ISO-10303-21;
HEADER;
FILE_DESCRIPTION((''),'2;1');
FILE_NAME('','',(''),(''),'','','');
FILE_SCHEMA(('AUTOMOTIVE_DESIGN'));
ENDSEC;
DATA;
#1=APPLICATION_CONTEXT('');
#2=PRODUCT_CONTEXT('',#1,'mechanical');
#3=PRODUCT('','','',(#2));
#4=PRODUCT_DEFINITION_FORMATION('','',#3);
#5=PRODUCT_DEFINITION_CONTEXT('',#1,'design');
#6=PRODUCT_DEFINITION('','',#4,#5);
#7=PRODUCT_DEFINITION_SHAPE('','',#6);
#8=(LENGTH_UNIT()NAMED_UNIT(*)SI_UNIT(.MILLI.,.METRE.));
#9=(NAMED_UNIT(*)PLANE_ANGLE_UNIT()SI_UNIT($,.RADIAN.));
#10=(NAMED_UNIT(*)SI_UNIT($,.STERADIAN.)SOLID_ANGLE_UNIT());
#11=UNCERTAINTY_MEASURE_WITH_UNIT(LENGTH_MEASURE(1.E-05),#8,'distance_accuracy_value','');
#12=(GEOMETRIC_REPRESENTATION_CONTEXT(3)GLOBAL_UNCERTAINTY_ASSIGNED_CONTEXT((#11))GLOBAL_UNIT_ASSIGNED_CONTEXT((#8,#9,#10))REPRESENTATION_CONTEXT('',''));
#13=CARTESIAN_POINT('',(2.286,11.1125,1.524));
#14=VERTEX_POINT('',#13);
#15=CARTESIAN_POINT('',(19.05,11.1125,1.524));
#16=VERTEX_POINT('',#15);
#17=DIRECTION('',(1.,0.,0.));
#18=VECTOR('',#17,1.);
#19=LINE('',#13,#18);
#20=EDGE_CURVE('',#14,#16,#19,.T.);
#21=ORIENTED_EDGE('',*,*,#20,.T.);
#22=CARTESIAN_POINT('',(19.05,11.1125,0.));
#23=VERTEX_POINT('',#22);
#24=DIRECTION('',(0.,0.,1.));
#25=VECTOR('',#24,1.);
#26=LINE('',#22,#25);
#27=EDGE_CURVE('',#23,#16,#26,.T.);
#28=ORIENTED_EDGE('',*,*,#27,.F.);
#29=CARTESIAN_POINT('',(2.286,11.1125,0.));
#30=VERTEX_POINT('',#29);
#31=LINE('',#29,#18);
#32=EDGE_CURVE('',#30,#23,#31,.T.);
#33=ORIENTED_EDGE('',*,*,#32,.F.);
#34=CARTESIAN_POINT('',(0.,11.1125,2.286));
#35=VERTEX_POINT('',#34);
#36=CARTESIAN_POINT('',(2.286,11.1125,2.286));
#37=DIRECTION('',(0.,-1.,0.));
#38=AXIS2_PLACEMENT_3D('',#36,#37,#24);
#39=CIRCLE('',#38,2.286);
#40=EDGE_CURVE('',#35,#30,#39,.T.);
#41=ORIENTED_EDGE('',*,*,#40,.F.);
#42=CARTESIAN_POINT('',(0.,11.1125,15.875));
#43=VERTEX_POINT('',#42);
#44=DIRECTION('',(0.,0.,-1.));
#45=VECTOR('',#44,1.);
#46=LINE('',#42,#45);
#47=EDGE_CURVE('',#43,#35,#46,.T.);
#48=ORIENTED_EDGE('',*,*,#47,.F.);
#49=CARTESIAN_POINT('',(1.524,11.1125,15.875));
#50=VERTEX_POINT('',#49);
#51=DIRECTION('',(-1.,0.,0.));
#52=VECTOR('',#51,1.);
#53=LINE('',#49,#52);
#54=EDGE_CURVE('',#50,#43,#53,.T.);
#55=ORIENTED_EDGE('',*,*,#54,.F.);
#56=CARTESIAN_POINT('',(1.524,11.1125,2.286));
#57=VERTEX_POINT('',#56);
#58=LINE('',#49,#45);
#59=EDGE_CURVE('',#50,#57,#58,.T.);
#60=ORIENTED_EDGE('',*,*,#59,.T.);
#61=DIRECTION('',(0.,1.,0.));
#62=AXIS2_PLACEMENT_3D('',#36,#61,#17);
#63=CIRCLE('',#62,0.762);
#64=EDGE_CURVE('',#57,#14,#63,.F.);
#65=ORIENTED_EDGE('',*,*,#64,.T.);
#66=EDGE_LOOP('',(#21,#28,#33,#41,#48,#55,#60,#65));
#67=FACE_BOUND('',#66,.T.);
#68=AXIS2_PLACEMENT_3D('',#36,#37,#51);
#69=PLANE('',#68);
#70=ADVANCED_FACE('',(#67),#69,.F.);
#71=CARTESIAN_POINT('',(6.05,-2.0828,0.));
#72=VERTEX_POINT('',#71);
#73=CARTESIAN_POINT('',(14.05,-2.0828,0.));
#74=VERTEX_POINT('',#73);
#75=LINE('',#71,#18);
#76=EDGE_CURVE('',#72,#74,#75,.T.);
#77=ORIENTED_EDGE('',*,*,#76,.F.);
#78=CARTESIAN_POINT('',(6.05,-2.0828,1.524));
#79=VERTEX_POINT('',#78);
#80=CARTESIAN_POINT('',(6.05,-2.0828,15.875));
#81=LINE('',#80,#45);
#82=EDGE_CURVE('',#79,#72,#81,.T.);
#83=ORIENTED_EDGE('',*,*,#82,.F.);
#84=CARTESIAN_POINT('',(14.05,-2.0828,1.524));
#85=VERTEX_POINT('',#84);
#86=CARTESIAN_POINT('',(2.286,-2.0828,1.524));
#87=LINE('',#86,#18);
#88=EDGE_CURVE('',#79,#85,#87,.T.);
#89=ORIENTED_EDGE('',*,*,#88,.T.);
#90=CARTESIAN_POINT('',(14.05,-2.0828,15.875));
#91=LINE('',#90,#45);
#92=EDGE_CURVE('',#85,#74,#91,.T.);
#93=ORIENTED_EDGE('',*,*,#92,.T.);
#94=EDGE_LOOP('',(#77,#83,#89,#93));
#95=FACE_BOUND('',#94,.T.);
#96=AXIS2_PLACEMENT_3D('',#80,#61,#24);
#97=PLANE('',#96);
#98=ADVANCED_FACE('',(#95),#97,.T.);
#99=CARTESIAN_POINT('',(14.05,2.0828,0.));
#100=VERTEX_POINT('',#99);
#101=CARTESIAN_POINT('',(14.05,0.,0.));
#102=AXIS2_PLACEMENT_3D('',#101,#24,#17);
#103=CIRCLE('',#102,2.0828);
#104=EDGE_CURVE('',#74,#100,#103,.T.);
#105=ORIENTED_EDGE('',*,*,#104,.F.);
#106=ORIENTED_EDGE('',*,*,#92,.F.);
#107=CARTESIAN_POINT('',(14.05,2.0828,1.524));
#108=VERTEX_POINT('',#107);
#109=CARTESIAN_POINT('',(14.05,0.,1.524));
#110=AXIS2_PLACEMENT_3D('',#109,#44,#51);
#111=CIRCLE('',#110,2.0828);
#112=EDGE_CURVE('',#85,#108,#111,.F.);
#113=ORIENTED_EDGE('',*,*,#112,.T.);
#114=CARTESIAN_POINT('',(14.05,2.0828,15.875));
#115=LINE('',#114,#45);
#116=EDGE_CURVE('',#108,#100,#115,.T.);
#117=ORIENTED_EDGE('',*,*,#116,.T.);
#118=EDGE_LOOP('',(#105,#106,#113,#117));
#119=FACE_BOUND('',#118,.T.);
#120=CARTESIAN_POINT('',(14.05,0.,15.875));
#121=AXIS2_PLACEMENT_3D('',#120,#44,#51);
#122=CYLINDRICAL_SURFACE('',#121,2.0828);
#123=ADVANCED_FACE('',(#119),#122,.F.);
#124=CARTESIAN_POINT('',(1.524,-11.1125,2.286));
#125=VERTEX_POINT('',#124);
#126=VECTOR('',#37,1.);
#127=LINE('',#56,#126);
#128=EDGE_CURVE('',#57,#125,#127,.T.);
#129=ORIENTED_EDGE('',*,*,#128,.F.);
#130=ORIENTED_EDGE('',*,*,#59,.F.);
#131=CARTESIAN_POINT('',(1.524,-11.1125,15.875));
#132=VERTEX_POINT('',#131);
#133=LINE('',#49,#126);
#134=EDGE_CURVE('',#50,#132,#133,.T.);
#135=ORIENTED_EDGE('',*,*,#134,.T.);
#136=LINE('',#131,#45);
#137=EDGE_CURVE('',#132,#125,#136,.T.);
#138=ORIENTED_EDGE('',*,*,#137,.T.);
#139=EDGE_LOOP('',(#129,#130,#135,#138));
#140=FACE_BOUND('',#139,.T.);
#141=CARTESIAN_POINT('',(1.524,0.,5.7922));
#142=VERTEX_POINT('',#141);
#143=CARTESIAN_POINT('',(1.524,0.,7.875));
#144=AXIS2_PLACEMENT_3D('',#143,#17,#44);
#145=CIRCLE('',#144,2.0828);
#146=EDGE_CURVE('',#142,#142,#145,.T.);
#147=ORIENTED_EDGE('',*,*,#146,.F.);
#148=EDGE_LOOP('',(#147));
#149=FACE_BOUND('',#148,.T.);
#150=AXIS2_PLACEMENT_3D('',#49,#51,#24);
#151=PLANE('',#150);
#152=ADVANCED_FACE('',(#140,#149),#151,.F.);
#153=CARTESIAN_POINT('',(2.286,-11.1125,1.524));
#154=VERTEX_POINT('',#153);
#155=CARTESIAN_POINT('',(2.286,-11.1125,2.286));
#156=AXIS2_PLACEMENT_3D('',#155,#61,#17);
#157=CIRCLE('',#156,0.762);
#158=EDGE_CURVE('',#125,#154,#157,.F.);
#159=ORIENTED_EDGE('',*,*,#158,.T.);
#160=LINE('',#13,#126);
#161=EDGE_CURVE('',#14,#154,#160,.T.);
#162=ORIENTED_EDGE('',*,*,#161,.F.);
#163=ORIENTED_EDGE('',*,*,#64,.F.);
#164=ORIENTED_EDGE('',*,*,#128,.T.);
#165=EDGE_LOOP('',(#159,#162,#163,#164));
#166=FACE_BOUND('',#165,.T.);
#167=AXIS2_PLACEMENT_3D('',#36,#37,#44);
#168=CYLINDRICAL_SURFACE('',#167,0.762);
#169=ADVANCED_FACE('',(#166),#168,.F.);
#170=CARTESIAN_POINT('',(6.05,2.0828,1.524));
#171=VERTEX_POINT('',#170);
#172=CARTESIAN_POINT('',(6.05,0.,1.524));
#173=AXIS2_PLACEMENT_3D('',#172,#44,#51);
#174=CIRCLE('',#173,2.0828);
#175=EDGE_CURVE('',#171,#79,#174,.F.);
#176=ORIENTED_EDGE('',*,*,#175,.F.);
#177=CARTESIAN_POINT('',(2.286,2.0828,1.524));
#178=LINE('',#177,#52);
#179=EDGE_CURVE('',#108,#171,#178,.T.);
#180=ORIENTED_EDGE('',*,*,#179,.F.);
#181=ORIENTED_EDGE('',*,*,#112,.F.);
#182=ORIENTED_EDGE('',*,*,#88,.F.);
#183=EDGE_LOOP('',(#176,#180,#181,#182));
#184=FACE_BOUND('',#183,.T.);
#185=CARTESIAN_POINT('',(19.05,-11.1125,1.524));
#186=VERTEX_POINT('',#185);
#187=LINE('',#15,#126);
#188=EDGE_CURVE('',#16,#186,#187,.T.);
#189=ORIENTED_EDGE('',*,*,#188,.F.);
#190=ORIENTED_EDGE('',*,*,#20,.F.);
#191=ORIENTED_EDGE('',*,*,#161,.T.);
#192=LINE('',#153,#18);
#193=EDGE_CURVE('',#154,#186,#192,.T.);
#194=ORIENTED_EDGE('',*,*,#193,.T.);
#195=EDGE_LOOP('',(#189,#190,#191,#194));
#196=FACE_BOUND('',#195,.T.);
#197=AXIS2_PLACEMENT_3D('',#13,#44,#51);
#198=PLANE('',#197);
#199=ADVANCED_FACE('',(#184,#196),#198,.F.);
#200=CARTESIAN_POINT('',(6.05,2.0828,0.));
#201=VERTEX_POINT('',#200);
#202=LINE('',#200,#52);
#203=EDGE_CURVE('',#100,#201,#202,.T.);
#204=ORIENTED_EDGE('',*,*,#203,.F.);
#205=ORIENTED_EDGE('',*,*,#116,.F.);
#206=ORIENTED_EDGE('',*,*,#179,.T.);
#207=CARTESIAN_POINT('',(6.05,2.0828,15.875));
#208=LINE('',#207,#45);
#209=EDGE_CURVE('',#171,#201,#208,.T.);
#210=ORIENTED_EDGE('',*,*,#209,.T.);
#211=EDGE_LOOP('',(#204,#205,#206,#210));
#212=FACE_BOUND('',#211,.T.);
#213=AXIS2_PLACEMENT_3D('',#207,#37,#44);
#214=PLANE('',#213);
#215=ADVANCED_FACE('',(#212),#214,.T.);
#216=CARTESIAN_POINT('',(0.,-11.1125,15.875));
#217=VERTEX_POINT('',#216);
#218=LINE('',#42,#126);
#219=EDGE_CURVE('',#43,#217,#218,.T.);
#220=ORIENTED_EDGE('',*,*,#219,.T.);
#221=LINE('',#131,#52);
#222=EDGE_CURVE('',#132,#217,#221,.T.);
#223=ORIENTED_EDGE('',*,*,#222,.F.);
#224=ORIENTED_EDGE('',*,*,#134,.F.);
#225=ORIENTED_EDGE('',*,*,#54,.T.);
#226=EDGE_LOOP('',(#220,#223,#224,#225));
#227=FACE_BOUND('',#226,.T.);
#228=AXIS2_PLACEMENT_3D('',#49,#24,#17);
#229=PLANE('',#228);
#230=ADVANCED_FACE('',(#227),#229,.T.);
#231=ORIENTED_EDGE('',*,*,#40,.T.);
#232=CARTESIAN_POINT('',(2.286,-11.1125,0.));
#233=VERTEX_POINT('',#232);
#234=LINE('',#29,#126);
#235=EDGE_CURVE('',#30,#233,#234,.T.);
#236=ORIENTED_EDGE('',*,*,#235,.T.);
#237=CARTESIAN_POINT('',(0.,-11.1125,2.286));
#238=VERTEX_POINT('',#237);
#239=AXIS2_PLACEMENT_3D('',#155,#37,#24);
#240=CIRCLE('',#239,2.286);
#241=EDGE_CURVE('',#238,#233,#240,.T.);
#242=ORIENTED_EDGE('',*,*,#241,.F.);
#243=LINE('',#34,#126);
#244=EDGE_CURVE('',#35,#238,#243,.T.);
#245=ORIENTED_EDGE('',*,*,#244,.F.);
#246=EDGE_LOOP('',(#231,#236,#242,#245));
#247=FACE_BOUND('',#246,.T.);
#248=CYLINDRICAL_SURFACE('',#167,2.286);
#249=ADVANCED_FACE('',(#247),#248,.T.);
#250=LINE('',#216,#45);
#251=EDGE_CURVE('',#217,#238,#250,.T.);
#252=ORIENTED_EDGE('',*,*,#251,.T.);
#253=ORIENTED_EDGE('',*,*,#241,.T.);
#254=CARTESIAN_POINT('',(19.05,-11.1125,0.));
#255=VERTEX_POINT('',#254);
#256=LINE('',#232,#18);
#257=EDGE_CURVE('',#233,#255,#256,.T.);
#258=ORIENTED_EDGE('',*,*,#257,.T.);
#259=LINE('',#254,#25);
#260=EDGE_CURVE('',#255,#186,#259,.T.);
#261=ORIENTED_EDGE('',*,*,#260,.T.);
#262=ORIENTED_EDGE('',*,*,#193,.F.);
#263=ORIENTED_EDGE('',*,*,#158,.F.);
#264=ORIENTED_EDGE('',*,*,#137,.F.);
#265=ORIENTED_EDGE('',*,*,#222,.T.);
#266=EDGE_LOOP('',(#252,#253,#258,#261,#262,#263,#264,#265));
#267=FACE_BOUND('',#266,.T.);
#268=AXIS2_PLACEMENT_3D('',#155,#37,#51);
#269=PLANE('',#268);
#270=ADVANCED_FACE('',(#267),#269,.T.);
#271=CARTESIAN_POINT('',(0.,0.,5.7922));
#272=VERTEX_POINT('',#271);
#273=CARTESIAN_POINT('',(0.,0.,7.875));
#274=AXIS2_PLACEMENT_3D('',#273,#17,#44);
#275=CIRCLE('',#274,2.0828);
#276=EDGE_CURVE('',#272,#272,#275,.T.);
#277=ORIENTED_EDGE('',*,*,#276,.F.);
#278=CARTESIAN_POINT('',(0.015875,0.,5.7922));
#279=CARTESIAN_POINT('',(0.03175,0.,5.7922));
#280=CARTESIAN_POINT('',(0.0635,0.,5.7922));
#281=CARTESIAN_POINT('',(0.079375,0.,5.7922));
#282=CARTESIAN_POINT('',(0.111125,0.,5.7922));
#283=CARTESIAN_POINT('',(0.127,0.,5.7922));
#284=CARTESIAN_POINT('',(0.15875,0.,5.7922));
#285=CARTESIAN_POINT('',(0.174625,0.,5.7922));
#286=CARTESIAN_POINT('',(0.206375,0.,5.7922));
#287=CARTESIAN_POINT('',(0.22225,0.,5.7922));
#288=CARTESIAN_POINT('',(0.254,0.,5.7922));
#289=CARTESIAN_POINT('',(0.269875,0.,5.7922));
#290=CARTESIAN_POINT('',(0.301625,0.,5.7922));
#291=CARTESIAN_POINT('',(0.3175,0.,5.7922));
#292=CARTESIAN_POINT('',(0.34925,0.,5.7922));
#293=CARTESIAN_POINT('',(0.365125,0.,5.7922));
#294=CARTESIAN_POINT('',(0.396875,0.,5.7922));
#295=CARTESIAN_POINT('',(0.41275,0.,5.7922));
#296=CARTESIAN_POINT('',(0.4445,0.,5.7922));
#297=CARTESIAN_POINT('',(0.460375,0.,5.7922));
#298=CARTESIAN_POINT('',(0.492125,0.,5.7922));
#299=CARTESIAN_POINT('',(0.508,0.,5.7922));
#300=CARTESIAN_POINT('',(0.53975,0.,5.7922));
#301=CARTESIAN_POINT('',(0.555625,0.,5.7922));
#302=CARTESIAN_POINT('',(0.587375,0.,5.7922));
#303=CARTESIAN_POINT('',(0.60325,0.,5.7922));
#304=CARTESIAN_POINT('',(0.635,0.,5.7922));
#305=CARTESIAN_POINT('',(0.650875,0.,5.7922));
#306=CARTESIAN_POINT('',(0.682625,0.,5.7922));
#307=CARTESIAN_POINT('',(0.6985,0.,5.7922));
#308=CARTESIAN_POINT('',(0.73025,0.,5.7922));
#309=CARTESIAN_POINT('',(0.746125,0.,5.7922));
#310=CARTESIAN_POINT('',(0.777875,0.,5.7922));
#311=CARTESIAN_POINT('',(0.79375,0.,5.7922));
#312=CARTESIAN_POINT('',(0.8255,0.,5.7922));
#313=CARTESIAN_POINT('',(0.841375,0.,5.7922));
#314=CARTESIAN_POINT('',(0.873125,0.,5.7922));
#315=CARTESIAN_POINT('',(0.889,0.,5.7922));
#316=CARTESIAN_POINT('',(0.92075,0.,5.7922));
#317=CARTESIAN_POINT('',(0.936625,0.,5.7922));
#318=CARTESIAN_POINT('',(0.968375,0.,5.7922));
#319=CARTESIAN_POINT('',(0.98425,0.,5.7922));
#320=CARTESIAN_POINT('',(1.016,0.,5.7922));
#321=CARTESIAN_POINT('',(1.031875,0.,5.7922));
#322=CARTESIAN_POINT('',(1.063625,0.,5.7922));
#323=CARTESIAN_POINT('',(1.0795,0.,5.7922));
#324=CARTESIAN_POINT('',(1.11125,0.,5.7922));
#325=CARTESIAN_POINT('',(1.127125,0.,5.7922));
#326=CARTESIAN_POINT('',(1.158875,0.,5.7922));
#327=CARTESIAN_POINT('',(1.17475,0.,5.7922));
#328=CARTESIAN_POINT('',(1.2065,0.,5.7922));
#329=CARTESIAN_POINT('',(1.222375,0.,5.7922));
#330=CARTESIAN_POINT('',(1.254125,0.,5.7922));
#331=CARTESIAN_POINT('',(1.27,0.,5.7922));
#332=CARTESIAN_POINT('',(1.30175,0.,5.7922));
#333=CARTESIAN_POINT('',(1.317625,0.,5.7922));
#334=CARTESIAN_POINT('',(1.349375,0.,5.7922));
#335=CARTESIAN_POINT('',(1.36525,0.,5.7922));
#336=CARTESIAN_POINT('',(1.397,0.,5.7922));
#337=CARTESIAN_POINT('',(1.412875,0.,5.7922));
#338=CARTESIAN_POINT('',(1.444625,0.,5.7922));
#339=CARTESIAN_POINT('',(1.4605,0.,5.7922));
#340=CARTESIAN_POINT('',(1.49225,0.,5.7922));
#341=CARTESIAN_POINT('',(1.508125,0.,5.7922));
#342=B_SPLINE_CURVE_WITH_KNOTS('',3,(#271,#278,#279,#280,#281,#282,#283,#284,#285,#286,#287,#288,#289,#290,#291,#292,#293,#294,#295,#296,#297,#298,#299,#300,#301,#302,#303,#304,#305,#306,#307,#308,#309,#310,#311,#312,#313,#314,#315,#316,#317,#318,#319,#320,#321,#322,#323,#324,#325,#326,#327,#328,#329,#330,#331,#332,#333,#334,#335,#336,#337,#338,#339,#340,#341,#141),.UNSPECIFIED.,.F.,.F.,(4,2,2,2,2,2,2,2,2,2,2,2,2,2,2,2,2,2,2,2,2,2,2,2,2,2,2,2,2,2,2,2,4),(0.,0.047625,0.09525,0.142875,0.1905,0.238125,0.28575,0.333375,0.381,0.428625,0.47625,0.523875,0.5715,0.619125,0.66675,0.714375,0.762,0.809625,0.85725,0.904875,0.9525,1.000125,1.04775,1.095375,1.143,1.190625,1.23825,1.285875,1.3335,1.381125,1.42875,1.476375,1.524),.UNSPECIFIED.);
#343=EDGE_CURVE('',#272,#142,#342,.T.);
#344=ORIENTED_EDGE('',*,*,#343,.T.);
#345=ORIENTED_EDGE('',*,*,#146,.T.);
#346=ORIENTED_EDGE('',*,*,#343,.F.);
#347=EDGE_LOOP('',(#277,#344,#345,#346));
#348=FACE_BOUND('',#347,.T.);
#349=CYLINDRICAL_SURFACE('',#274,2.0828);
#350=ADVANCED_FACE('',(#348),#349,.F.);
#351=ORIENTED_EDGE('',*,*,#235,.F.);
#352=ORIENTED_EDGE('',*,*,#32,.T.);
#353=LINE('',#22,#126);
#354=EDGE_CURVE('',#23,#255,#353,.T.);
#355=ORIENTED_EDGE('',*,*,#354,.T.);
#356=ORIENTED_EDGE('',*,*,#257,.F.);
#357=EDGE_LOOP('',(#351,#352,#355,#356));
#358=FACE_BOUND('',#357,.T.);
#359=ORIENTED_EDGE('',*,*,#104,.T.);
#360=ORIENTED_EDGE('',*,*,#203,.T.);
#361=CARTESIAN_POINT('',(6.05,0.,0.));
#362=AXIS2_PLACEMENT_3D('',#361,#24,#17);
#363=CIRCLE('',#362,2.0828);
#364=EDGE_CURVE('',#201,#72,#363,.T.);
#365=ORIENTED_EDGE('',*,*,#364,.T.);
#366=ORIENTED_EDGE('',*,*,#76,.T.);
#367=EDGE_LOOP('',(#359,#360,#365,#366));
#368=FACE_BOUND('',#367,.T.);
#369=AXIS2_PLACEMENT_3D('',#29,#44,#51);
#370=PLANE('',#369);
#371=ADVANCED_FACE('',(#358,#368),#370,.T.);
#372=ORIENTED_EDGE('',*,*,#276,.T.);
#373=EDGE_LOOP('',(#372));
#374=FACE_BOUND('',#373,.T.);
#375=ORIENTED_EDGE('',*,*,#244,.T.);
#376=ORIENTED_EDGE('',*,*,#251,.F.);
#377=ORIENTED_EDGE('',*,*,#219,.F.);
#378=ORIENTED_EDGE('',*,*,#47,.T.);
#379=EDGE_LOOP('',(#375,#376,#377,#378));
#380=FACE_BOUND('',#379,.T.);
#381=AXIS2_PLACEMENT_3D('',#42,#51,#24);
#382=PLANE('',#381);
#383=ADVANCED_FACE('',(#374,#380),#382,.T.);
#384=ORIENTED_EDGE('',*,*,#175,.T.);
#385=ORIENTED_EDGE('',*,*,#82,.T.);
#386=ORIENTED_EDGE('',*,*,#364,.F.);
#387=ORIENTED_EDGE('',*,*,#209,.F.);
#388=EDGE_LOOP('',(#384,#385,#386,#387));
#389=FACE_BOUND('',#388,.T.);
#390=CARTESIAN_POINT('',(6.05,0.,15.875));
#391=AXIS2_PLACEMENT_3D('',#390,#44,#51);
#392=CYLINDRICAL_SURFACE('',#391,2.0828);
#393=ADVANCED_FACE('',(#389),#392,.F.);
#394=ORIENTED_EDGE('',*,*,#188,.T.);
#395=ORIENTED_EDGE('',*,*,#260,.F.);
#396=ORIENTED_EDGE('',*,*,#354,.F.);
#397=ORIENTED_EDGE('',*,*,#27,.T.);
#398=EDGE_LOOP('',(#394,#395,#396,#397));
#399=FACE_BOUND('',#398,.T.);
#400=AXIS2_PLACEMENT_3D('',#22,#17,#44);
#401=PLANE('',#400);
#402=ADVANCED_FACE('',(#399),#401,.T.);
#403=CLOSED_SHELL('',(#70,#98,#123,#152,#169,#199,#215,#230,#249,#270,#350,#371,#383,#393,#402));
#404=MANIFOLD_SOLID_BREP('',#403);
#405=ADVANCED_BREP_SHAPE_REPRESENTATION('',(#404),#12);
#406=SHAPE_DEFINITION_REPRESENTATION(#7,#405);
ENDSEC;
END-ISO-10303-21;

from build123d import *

# Parameters (mm, degrees)
EXTRUDE_THIN1_START = -11.1125
EXTRUDE_THIN1_DEPTH = 22.225
SKETCH4_R           = 2.0828
EXTRUDE3_DEPTH      = 27.127838741
CUT_EXTRUDE1_DEPTH  = 28.173622895


# Read off the part's stored shape, not the designer's step: Extrude-Thin1
with BuildPart() as part:
    # Extrude-Thin1 outline → Extrude-Thin1 (new body)
    with BuildSketch(Plane(origin=(0, 0, 0), x_dir=(1, 0, 0), z_dir=(0, 1, 0)).offset(EXTRUDE_THIN1_START)):
        with BuildLine():
            Line((2.286, -1.524), (19.05, -1.524))
            Line((19.05, -1.524), (19.05, 0))
            Line((19.05, 0), (2.286, 0))
            ThreePointArc((2.286, 0), (0.669553898, -0.669553898), (0, -2.286))
            Line((0, -2.286), (0, -15.875))
            Line((0, -15.875), (1.524, -15.875))
            Line((1.524, -15.875), (1.524, -2.286))
            ThreePointArc((1.524, -2.286), (1.747184633, -1.747184633), (2.286, -1.524))
        make_face()
    extrude(amount=EXTRUDE_THIN1_DEPTH)

    # Sketch4 → Extrude3 (cut, through all)
    with BuildSketch(Plane(origin=(1.524, 0, 0), x_dir=(0, 0, -1), z_dir=(1, 0, 0))):
        with Locations((-7.875, 0)):
            Circle(SKETCH4_R)
    extrude(amount=-EXTRUDE3_DEPTH, mode=Mode.SUBTRACT)

    # Sketch6 → Cut-Extrude1 (cut, through all)
    with BuildSketch(Plane.XY):
        with BuildLine():
            Line((6.05, 2.0828), (14.05, 2.0828))
            ThreePointArc((14.05, 2.0828), (16.1328, 0), (14.05, -2.0828))
            Line((14.05, -2.0828), (6.05, -2.0828))
            ThreePointArc((6.05, -2.0828), (3.9672, 0), (6.05, 2.0828))
        make_face()
    extrude(amount=CUT_EXTRUDE1_DEPTH, mode=Mode.SUBTRACT)


solid = part.part
